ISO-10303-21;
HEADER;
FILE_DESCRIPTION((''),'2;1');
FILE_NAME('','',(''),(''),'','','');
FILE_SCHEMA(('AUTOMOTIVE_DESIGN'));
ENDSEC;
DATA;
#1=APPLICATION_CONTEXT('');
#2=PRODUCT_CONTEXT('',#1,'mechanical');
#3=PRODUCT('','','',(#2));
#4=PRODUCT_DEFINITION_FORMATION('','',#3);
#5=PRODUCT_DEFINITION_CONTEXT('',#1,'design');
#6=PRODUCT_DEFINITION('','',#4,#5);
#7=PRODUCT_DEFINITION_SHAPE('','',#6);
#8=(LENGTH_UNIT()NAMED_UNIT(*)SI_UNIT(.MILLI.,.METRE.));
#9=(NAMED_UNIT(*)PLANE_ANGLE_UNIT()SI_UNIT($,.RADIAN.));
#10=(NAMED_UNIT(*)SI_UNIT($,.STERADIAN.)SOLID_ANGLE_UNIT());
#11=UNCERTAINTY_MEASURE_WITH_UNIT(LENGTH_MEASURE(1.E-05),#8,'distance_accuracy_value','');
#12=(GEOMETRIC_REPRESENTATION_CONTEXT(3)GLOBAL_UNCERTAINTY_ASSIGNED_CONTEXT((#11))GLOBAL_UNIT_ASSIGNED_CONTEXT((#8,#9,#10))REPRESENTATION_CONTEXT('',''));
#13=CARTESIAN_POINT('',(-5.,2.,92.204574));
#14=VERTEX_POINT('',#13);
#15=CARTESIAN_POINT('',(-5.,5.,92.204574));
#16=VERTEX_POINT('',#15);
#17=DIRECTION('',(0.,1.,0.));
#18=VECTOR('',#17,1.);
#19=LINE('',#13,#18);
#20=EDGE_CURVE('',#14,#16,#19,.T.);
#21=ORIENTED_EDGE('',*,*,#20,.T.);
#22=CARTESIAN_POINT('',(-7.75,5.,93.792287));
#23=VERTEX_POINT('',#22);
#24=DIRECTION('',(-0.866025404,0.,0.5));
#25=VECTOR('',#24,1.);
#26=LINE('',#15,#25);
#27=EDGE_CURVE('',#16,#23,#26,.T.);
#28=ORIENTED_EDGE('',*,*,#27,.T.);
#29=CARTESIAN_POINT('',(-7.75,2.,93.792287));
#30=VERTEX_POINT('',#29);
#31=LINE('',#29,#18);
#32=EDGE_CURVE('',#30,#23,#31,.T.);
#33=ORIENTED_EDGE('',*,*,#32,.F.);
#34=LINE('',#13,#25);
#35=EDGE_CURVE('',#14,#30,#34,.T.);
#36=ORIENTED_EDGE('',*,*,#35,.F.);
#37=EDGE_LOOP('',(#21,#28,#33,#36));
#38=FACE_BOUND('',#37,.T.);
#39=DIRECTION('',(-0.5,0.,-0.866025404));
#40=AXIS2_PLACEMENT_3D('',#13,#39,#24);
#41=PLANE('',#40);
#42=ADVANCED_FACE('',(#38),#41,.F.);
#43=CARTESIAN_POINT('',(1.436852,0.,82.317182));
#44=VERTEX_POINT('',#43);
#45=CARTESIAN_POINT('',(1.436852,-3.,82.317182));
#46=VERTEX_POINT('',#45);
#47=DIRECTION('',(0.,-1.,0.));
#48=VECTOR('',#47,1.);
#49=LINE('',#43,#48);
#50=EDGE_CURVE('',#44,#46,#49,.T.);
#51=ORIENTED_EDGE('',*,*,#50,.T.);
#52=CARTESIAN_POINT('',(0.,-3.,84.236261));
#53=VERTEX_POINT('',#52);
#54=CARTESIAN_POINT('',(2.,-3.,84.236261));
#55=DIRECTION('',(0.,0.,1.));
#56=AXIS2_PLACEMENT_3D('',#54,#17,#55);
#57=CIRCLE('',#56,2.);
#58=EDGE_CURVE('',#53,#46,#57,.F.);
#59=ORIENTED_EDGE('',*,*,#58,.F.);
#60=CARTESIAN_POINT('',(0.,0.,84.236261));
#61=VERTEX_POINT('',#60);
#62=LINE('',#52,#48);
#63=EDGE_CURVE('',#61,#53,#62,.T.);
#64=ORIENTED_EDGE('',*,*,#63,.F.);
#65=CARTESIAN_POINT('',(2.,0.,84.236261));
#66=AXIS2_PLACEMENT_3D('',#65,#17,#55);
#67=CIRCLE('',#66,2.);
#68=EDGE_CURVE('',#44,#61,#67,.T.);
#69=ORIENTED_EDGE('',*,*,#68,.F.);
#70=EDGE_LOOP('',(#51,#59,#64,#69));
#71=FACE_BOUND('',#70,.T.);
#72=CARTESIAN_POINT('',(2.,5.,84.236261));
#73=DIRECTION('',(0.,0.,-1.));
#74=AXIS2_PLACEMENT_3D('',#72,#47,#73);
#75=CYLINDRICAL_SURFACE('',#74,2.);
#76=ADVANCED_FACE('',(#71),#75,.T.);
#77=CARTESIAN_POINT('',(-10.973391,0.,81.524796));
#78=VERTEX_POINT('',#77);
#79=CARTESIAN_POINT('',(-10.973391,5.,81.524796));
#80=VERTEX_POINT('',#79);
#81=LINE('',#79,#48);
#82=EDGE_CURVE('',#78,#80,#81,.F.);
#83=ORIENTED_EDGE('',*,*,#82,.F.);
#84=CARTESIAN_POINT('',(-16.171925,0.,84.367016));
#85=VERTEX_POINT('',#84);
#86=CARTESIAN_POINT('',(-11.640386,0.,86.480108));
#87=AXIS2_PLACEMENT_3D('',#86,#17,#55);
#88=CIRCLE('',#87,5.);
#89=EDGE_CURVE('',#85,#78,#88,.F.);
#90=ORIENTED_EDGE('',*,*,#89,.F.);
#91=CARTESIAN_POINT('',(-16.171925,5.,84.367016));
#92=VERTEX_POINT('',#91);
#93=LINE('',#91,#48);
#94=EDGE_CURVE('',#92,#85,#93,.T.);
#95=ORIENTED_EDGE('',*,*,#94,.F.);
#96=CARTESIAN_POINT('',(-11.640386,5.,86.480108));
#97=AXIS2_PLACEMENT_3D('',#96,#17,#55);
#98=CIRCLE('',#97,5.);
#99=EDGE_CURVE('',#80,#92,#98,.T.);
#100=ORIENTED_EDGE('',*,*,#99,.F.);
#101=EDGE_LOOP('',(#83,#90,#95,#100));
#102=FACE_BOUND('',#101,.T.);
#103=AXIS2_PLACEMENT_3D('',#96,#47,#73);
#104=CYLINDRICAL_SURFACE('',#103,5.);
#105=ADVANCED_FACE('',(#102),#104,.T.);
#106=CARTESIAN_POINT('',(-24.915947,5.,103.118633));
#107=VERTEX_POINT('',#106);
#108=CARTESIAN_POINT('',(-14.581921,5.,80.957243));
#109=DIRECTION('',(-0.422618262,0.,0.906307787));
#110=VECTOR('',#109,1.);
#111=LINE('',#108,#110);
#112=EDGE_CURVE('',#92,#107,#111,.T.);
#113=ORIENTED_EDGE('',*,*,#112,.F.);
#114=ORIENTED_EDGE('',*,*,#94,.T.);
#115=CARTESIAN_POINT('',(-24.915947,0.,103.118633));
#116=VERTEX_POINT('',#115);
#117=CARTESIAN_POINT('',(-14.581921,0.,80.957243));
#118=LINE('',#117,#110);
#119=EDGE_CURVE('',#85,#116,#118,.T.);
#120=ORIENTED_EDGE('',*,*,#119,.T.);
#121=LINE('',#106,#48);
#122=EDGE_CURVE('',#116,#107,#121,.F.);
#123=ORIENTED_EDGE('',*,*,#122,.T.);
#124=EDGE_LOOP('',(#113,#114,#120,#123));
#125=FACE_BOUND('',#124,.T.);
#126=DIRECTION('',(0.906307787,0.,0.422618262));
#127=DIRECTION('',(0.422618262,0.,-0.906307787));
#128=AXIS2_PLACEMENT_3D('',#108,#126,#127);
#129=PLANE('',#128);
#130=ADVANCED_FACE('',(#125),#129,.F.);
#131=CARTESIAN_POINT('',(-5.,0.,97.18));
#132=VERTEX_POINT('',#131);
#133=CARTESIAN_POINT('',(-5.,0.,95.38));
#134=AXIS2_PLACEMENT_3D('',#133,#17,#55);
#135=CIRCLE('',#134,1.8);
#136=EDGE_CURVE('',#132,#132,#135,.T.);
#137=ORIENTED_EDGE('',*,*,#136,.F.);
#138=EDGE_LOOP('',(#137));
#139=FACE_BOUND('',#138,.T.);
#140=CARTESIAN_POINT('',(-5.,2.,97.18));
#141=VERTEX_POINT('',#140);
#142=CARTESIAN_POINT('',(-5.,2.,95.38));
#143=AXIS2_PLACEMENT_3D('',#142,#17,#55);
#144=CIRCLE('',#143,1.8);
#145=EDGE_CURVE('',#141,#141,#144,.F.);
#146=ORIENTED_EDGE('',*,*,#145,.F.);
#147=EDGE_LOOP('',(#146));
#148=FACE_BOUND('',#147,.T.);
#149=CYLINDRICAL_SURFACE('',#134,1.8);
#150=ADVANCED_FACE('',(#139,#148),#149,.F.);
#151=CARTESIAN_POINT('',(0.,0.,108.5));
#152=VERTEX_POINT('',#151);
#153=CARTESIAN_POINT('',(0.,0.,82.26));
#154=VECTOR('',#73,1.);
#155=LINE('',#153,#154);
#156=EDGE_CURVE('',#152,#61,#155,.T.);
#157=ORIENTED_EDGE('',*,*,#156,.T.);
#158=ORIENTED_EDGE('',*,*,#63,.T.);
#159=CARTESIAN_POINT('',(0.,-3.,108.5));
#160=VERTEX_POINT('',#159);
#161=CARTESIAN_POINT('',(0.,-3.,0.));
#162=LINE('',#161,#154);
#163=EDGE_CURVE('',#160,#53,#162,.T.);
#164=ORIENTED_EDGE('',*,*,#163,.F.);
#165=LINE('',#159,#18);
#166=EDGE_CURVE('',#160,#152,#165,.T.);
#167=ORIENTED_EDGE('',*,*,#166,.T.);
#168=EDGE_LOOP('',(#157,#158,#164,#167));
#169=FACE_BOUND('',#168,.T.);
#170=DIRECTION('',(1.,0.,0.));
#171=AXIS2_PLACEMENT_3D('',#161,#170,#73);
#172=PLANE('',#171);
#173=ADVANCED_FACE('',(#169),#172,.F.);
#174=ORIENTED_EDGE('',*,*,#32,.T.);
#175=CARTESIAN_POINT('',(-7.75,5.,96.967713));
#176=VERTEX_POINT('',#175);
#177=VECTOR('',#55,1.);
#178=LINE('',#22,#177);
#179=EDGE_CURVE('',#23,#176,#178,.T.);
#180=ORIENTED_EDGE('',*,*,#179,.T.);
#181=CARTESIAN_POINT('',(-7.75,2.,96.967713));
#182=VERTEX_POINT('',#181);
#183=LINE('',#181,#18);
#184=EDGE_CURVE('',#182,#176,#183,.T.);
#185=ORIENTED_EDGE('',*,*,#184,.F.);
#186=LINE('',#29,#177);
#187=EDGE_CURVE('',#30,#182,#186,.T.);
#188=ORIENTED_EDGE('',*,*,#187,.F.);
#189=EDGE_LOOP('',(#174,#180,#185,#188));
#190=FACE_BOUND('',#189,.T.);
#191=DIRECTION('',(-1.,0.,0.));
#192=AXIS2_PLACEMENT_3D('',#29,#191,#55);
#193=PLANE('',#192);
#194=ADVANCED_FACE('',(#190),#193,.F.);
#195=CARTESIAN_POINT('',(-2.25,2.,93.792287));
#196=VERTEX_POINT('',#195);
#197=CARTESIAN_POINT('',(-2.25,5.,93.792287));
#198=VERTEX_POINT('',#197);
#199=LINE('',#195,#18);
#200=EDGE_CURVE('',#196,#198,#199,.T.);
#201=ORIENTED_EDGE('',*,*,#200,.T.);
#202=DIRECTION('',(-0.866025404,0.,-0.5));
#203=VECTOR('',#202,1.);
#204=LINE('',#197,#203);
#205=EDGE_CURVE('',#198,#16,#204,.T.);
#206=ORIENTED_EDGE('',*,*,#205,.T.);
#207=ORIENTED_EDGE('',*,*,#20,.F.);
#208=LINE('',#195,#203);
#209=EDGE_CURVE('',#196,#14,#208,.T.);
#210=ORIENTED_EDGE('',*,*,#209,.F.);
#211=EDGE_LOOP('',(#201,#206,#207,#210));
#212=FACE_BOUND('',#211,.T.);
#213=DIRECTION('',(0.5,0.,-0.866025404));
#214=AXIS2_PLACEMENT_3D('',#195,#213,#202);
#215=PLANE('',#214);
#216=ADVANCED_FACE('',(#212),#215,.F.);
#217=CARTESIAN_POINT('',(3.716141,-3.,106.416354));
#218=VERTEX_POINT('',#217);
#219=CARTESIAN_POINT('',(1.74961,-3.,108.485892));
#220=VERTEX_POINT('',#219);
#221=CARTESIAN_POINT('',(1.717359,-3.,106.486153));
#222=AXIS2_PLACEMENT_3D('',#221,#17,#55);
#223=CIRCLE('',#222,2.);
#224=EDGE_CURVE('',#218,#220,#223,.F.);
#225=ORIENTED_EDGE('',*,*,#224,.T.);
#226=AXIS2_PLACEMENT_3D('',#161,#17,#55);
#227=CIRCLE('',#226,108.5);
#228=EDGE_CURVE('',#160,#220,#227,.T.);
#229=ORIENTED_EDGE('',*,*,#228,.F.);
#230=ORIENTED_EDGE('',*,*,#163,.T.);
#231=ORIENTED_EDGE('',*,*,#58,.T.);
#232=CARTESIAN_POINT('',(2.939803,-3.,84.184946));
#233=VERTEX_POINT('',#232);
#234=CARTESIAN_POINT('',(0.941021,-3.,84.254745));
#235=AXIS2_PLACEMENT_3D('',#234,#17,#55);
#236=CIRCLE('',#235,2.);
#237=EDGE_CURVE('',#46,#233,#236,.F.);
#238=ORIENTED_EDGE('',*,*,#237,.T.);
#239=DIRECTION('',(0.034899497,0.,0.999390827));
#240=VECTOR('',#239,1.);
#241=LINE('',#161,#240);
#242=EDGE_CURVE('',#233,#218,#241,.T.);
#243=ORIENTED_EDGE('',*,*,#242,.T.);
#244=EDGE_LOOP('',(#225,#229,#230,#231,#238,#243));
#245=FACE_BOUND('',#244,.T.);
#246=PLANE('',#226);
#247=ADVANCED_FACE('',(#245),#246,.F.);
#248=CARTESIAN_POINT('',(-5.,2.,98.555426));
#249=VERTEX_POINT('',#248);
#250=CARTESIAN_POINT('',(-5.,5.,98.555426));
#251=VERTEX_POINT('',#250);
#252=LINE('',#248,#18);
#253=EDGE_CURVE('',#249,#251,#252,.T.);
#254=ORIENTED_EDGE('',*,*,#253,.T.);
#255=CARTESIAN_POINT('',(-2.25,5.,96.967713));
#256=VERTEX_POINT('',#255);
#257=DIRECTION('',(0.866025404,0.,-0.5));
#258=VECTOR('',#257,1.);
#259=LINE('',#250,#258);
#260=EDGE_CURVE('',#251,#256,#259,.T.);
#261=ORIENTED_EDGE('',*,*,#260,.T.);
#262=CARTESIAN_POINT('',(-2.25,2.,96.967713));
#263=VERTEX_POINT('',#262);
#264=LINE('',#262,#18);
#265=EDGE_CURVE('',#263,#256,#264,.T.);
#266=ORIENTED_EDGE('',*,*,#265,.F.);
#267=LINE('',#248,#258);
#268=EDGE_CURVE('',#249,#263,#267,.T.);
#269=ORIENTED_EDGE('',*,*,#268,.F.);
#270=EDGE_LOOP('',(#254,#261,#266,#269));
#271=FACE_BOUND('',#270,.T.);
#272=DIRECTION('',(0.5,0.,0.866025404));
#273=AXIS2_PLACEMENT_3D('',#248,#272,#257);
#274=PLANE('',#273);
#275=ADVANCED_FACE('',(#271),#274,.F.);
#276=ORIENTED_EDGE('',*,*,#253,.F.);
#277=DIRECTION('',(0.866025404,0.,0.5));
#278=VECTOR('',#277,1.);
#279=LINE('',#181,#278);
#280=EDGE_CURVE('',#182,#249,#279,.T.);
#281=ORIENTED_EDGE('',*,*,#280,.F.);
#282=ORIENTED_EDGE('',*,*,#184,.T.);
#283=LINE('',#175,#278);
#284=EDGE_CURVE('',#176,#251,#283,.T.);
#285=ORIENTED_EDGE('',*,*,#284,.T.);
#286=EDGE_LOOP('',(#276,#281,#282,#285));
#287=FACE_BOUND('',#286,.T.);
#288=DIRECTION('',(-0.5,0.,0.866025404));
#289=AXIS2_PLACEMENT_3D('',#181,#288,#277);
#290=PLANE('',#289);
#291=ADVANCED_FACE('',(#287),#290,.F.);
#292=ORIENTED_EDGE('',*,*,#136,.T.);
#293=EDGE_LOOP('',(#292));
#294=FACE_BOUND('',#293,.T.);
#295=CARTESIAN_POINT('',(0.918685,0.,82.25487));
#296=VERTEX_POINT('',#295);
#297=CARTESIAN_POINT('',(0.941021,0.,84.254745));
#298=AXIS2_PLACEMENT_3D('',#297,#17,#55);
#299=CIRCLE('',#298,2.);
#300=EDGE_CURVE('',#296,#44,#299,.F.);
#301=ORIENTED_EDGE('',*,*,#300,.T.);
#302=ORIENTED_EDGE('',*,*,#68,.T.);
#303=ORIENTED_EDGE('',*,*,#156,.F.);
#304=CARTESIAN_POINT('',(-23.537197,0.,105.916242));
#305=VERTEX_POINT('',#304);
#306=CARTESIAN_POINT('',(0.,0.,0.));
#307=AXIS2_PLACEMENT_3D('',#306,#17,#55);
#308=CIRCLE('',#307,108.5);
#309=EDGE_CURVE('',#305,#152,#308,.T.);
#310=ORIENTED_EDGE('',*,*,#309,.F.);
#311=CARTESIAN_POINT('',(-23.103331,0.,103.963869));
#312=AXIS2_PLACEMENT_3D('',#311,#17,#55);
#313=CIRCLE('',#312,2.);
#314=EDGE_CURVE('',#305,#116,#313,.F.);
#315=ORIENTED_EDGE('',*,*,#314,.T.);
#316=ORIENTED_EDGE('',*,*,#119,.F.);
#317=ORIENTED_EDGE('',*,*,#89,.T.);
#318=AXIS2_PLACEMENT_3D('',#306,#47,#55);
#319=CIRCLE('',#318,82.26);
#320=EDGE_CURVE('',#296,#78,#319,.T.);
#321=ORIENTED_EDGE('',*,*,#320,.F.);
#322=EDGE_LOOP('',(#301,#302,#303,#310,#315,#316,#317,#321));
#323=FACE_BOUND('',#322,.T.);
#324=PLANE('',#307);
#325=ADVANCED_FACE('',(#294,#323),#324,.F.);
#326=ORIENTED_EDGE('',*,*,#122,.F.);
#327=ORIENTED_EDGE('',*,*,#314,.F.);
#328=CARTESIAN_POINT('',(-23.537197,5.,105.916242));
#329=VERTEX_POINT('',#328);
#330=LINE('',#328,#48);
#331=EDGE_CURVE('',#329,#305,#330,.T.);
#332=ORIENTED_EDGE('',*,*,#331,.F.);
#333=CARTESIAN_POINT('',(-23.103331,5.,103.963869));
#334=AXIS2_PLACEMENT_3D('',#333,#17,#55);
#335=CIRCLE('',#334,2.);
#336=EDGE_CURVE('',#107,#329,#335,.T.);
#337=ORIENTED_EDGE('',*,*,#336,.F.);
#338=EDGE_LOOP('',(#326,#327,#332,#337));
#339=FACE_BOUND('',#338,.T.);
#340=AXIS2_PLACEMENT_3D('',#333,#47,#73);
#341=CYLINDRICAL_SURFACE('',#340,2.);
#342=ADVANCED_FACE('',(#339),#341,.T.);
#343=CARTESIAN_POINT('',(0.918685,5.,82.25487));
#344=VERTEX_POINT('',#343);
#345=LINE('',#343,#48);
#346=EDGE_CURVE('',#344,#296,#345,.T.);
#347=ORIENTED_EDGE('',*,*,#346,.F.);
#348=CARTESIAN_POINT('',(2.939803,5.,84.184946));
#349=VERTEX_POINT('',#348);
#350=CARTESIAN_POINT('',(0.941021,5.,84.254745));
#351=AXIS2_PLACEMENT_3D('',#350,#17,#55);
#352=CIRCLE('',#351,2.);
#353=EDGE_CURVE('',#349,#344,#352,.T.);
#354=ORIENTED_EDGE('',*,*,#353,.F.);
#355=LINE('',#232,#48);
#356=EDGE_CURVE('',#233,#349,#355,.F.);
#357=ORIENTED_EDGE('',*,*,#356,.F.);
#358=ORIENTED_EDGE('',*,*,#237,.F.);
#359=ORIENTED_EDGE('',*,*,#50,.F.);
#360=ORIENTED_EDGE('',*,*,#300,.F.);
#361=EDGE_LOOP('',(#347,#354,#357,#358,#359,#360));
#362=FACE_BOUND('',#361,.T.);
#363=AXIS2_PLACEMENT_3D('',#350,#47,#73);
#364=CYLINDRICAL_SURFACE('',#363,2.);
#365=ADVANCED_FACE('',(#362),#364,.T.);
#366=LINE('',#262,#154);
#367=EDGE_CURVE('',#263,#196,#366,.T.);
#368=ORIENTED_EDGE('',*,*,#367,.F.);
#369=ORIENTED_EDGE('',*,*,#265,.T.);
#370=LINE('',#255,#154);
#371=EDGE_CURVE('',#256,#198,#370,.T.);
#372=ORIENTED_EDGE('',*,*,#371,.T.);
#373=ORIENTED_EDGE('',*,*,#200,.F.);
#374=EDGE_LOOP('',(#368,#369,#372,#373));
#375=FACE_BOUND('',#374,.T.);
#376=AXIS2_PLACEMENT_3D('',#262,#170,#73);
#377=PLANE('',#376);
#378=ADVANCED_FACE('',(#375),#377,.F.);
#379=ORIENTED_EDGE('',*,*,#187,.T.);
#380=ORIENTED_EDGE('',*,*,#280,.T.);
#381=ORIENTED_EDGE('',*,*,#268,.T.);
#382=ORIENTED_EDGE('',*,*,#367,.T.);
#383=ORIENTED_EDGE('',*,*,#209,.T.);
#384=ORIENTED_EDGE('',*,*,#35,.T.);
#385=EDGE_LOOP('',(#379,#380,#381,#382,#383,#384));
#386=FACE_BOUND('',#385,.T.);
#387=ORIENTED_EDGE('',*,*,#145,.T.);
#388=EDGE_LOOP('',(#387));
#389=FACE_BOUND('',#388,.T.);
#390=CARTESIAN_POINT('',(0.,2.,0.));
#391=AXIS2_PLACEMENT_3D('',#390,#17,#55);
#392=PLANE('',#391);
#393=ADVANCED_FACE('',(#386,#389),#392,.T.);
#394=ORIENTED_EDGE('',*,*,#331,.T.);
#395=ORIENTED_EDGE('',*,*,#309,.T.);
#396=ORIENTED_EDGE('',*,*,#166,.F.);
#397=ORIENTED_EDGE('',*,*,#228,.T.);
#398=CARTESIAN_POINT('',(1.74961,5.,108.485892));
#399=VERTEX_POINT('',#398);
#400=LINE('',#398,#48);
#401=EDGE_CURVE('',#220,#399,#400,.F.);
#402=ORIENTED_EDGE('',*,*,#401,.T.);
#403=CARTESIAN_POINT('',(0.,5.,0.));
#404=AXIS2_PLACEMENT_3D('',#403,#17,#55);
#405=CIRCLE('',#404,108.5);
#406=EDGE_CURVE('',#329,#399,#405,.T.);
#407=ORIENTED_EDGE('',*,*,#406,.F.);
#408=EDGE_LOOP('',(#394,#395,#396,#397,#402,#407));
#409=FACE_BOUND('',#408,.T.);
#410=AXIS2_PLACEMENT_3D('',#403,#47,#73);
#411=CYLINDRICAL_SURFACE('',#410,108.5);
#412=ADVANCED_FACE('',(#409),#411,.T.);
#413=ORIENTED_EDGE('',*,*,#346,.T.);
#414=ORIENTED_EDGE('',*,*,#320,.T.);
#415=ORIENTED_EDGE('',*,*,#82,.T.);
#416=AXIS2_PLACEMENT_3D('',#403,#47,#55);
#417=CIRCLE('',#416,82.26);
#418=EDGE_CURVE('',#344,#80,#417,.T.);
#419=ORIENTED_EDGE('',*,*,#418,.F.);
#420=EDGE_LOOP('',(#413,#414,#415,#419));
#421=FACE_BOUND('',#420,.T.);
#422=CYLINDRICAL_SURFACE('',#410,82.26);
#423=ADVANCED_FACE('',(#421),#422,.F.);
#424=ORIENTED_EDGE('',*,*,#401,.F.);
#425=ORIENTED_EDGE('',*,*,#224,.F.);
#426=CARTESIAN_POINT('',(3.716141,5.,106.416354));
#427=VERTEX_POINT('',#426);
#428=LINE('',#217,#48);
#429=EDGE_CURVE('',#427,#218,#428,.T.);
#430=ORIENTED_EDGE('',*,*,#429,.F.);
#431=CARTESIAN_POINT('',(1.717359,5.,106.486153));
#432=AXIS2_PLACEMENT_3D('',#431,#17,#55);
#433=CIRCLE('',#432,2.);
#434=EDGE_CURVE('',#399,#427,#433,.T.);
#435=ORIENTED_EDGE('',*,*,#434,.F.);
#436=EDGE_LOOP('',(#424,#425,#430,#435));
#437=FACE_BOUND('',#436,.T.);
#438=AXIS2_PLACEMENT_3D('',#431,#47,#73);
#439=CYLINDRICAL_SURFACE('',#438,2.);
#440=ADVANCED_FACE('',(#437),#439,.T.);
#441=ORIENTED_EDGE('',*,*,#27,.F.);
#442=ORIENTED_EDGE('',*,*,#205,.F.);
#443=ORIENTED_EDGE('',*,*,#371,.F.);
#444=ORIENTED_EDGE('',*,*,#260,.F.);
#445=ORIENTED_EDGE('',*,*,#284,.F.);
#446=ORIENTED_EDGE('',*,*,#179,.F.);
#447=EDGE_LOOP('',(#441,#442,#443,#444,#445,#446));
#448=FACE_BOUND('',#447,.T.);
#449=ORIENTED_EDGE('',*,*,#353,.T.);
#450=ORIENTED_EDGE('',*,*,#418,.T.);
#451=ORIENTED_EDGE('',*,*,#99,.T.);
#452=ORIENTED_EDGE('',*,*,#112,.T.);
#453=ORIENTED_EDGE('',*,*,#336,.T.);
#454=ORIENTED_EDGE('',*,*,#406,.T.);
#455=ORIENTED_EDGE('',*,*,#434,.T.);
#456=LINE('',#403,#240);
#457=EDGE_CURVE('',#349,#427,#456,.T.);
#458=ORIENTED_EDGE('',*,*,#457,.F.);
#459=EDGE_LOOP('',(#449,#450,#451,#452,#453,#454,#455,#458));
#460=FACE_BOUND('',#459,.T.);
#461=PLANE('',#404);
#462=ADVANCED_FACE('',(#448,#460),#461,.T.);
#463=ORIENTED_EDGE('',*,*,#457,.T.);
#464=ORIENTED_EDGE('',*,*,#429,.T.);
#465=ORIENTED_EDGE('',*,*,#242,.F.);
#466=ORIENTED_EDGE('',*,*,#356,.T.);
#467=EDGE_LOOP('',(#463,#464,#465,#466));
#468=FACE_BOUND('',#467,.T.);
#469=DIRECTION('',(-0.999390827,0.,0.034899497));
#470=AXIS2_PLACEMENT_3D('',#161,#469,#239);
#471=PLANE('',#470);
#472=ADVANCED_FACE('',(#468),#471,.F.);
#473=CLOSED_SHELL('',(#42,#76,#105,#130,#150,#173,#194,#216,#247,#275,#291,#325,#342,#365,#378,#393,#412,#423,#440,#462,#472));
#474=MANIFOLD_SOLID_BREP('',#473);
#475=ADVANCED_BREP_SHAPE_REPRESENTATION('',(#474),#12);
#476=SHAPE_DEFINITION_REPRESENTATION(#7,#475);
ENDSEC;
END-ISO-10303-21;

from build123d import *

# Parameters (mm, degrees)
RESSALTO_EXTRUS_O4_DEPTH = 5
ESBO_O8_R                = 1.8
CORTE_EXTRUS_O3_DEPTH    = 112.673524207
RESSALTO_EXTRUS_O5_START = -8
RESSALTO_EXTRUS_O5_DEPTH = 8
CORTE_EXTRUS_O4_DEPTH    = 3
FILETE1_R                = 5
FILETE2_R                = 2


with BuildPart() as part:
    # Esboço6 → Ressalto-extrusão4 (new body)
    with BuildSketch(Plane(origin=(0, 0, 0), x_dir=(1, 0, 0), z_dir=(0, 1, 0))):
        with BuildLine():
            Line((0, -82.26), (0, -108.5))
            ThreePointArc((0, -108.5), (-13.073364664, -107.709503464), (-25.956232563, -105.349532468))
            Line((-25.956232563, -105.349532468), (-14.581921132, -80.957242888))
            ThreePointArc((-14.581921132, -80.957242888), (-7.32, -81.933663411), (0, -82.26))
        make_face()
    extrude(amount=RESSALTO_EXTRUS_O4_DEPTH)

    # Esboço8 → Corte-extrusão3 (cut, through all)
    with BuildSketch(Plane(origin=(0, 5, 0), x_dir=(1, 0, 0), z_dir=(0, 1, 0))):
        with Locations(Location((-5, -95.38, 0), (0, 0, 270))):
            Circle(ESBO_O8_R)
    extrude(amount=-CORTE_EXTRUS_O3_DEPTH, mode=Mode.SUBTRACT)

    # Esboço7 → Ressalto-extrusão5 (add)
    with BuildSketch(Plane(origin=(0, 5, 0), x_dir=(1, 0, 0), z_dir=(0, 1, 0)).offset(RESSALTO_EXTRUS_O5_START)):
        with BuildLine():
            ThreePointArc((0, -108.5), (1.893586098, -108.483474924), (3.786595392, -108.433904732))
            Line((3.786595392, -108.433904732), (2.870832599, -82.209889431))
            ThreePointArc((2.870832599, -82.209889431), (1.435634954, -82.247471404), (0, -82.26))
            Line((0, -82.26), (0, -108.5))
        make_face()
    extrude(amount=RESSALTO_EXTRUS_O5_DEPTH)

    # Esboço9 → Corte-extrusão4 (cut)
    with BuildSketch(Plane(origin=(0, 5, 0), x_dir=(1, 0, 0), z_dir=(0, 1, 0))):
        Polygon((-7.75, -93.79228676), (-7.75, -96.96771324), (-5, -98.555426481), (-2.25, -96.96771324), (-2.25, -93.79228676), (-5, -92.204573519), align=None)
    extrude(amount=-CORTE_EXTRUS_O4_DEPTH, mode=Mode.SUBTRACT)

    # Filete1
    filete1_edges = [part.edges().sort_by_distance(p)[0] for p in [
        (-14.581921132, 2.5, 80.957242888),
    ]]
    fillet(filete1_edges, radius=FILETE1_R)

    # Filete2
    # the kernel refuses this fillet: 2 mm, written as the material it takes off along each edge
    with BuildSketch(Plane(origin=(-25.956232563, -6.211327666, 105.349532468), x_dir=(0.42261826174069944, 0, -0.9063077870366499), z_dir=(0, 1, 0))) as filete2_piece_1:
        with BuildLine():
            CenterArc((2.461525654, -2), FILETE2_R, 90, 102.471061381)
            ThreePointArc((0.508715252, -2.431892969), (0.247396438, -1.21740266), (0, 0))
            Line((0, 0), (2.461525654, 0))
        make_face()
    extrude(amount=17.422655332, mode=Mode.SUBTRACT)
    with BuildSketch(Plane(origin=(2.870832599, -7.940651502, 82.209889431), x_dir=(-0.9997346498502194, 0, 0.023035405116018468), z_dir=(0, 1, 0))) as filete2_piece_2:
        with BuildLine():
            CenterArc((1.976403158, 1.999859125), FILETE2_R, 180.680051756, 88.639896488)
            Line((-0.023455967, 1.976121398), (0, 0))
            ThreePointArc((0, 0), (0.976332715, 0.005794184), (1.952665431, 0))
        make_face()
    extrude(amount=17.881303004, mode=Mode.SUBTRACT)
    with BuildSketch(Plane(origin=(3.786595392, -8.094121302, 108.433904732), x_dir=(-0.034899496702502156, 0, -0.9993908270190958), z_dir=(0, 1, 0))) as filete2_piece_3:
        with BuildLine():
            CenterArc((2.018780999, 2), FILETE2_R, 178.923959667, 91.076040333)
            ThreePointArc((0.019133694, 2.037558685), (0.004783529, 1.01882426), (0, 0))
            Line((0, 0), (2.018780999, 0))
        make_face()
    extrude(amount=18.188242605, mode=Mode.SUBTRACT)
    with BuildSketch(Plane(origin=(0, -7.940651502, 82.26), x_dir=(0.9999295625583442, 0, -0.011868863546203106), z_dir=(0, 1, 0))) as filete2_piece_4:
        with BuildLine():
            CenterArc((1.976403158, -1.999859125), FILETE2_R, 90.680051756, 88.639896488)
            Line((-0.023455967, -1.976121398), (0, 0))
            ThreePointArc((0, 0), (0.976332715, -0.005794184), (1.952665431, 0))
        make_face()
    extrude(amount=7.940651502, mode=Mode.SUBTRACT)


solid = part.part
